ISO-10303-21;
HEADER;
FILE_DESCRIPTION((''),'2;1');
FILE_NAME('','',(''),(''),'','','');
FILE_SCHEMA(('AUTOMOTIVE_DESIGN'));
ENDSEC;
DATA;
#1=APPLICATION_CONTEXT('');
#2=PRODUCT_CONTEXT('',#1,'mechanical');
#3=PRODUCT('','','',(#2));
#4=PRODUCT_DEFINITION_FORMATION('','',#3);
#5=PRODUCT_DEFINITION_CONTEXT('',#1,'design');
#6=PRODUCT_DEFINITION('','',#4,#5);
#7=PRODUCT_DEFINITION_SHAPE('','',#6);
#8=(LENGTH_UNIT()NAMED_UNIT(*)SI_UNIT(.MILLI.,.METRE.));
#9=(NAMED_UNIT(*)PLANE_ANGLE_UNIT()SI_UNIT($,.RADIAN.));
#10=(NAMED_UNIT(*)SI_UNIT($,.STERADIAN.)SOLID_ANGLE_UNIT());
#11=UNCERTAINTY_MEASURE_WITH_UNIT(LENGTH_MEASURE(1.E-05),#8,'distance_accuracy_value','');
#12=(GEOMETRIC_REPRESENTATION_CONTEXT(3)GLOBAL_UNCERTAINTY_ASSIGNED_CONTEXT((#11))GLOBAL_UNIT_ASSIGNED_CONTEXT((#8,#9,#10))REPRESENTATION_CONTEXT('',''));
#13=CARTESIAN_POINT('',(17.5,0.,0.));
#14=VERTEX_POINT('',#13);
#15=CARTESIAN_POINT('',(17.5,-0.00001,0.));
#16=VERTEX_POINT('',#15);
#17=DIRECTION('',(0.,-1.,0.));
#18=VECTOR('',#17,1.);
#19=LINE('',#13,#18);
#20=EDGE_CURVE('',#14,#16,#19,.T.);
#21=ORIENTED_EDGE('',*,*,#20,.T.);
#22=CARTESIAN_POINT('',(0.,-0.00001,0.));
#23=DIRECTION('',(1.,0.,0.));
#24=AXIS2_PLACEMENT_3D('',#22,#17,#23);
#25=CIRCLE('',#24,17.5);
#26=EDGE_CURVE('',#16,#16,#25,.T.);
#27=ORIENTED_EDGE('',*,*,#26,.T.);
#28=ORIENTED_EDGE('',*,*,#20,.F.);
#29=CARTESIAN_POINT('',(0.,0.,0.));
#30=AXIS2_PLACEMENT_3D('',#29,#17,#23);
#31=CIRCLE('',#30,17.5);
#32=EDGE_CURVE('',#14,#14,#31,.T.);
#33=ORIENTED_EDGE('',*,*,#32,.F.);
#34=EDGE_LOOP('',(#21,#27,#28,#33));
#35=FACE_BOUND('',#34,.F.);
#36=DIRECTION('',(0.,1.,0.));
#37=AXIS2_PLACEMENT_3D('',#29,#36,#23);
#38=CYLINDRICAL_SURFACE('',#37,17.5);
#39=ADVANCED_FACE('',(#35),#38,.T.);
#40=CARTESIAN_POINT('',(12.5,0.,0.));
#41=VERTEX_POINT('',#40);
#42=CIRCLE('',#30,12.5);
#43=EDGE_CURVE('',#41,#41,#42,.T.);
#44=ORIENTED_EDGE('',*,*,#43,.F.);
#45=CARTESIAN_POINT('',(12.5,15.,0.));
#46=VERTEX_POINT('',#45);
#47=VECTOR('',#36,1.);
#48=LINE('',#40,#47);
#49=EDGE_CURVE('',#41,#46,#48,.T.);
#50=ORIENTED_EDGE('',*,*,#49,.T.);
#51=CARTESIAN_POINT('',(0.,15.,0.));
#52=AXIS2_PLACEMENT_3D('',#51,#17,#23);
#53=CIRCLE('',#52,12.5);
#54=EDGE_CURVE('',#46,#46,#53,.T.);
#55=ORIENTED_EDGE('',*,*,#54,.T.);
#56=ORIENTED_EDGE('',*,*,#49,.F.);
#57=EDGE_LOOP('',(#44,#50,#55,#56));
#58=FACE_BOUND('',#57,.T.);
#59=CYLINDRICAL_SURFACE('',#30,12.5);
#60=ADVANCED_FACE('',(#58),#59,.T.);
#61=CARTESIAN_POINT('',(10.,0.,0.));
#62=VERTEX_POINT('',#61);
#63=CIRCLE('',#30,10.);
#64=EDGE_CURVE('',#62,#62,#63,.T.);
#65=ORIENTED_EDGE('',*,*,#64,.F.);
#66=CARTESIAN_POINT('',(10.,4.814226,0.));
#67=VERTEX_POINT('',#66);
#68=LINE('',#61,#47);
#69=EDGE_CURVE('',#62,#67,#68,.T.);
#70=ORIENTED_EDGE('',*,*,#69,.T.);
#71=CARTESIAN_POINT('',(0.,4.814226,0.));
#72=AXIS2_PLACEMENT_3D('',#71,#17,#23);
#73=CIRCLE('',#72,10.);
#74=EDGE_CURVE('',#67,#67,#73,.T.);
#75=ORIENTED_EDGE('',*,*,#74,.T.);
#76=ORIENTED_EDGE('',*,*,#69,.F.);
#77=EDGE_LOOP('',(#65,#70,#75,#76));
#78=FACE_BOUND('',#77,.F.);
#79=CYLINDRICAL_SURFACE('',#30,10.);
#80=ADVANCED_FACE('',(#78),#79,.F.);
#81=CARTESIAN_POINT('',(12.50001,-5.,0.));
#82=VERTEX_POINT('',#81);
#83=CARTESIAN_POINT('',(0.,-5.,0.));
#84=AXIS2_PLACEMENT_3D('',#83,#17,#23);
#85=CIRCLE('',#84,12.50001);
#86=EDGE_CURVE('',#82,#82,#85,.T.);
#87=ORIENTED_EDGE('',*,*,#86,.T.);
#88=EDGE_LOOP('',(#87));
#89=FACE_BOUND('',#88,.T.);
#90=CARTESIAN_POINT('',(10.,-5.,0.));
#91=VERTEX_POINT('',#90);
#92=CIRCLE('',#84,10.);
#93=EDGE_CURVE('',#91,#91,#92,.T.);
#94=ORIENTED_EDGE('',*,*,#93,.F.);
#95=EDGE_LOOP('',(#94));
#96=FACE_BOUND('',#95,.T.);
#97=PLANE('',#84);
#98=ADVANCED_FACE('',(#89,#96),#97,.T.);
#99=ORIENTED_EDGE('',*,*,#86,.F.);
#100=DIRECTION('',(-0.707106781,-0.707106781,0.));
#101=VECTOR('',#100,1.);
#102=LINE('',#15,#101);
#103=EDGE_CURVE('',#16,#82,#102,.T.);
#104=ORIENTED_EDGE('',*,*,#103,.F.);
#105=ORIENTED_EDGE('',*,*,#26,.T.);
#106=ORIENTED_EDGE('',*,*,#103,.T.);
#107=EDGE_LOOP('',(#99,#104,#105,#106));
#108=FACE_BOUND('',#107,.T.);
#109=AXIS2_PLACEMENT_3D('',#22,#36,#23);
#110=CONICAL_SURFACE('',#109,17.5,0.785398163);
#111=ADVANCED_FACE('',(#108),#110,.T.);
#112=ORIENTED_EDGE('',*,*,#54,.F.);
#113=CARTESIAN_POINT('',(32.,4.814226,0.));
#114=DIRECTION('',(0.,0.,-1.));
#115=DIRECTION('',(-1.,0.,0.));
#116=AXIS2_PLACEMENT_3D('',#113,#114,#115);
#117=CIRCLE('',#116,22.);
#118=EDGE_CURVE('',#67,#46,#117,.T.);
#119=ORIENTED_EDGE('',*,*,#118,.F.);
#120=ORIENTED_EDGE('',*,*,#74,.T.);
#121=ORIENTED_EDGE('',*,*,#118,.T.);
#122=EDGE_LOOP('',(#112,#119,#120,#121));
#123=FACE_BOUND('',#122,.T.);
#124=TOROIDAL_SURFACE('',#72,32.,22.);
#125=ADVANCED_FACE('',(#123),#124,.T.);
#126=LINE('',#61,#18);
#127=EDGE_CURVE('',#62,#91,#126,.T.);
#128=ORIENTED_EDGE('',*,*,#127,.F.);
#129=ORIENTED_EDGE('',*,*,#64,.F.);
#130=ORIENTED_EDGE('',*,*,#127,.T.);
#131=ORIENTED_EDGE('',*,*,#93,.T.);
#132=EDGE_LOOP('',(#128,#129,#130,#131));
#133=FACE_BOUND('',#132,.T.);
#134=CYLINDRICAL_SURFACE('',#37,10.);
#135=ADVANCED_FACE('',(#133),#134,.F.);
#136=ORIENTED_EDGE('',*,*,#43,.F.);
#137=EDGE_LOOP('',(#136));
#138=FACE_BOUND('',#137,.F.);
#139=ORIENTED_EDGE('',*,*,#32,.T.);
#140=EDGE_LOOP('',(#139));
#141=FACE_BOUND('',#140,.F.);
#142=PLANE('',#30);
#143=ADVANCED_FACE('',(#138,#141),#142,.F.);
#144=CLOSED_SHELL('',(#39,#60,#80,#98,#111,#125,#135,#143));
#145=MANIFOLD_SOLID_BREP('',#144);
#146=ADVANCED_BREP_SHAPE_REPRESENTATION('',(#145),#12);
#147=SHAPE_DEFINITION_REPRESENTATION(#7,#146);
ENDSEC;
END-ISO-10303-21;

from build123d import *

# Parameters (mm, degrees)
F0_R     = 17.5
F0_R_2   = 12.5
F0_R_3   = 10
F1_DEPTH = 5
F2_DEPTH = 15
F4_SIZE  = 4.99999


# Not quite as in the source:
# - a fillet or chamfer that OpenCascade refuses, or shapes differently, is made with other operations: its cross-section is extruded or revolved along the edge and cut away or added
# - a fillet or chamfer is up to 0.001 mm smaller than in the source, because OpenCascade refuses the exact size


with BuildPart() as f1:
    # F0 (on Front) → F1 (new body)
    with BuildSketch(Plane.XZ):
        Circle(F0_R)
        Circle(F0_R_2, mode=Mode.SUBTRACT)
        Circle(F0_R_2)
        Circle(F0_R_3, mode=Mode.SUBTRACT)
    extrude(amount=F1_DEPTH)

    # F0 (on Front) → F2 (join)
    with BuildSketch(Plane.XZ):
        Circle(F0_R_2)
        Circle(F0_R_3, mode=Mode.SUBTRACT)
    extrude(amount=-F2_DEPTH)

    # F3: fillet of radius 22 on 1 edges, made by hand

    # F3_s1 → F3_t2 (revolve, cut)
    with BuildSketch(Plane.XY):
        with BuildLine():
            ThreePointArc((10, 4.8142256063), (10.6341393808, 10.0582698471), (12.5, 15))
            Line((12.5, 15), (10, 15))
            Line((10, 15), (10, 4.8142256063))
        make_face()
    revolve(axis=Axis((0, 15, 0), (0, -1, 0)), mode=Mode.SUBTRACT)

    # F4 (size 5 in the source; OpenCascade refuses exactly that, so slightly less here)
    f4_edges = [f1.edges().sort_by_distance(p)[0] for p in [
        (-17.5, -5, 0),
    ]]
    chamfer(f4_edges, length=F4_SIZE)


solid = f1.part
